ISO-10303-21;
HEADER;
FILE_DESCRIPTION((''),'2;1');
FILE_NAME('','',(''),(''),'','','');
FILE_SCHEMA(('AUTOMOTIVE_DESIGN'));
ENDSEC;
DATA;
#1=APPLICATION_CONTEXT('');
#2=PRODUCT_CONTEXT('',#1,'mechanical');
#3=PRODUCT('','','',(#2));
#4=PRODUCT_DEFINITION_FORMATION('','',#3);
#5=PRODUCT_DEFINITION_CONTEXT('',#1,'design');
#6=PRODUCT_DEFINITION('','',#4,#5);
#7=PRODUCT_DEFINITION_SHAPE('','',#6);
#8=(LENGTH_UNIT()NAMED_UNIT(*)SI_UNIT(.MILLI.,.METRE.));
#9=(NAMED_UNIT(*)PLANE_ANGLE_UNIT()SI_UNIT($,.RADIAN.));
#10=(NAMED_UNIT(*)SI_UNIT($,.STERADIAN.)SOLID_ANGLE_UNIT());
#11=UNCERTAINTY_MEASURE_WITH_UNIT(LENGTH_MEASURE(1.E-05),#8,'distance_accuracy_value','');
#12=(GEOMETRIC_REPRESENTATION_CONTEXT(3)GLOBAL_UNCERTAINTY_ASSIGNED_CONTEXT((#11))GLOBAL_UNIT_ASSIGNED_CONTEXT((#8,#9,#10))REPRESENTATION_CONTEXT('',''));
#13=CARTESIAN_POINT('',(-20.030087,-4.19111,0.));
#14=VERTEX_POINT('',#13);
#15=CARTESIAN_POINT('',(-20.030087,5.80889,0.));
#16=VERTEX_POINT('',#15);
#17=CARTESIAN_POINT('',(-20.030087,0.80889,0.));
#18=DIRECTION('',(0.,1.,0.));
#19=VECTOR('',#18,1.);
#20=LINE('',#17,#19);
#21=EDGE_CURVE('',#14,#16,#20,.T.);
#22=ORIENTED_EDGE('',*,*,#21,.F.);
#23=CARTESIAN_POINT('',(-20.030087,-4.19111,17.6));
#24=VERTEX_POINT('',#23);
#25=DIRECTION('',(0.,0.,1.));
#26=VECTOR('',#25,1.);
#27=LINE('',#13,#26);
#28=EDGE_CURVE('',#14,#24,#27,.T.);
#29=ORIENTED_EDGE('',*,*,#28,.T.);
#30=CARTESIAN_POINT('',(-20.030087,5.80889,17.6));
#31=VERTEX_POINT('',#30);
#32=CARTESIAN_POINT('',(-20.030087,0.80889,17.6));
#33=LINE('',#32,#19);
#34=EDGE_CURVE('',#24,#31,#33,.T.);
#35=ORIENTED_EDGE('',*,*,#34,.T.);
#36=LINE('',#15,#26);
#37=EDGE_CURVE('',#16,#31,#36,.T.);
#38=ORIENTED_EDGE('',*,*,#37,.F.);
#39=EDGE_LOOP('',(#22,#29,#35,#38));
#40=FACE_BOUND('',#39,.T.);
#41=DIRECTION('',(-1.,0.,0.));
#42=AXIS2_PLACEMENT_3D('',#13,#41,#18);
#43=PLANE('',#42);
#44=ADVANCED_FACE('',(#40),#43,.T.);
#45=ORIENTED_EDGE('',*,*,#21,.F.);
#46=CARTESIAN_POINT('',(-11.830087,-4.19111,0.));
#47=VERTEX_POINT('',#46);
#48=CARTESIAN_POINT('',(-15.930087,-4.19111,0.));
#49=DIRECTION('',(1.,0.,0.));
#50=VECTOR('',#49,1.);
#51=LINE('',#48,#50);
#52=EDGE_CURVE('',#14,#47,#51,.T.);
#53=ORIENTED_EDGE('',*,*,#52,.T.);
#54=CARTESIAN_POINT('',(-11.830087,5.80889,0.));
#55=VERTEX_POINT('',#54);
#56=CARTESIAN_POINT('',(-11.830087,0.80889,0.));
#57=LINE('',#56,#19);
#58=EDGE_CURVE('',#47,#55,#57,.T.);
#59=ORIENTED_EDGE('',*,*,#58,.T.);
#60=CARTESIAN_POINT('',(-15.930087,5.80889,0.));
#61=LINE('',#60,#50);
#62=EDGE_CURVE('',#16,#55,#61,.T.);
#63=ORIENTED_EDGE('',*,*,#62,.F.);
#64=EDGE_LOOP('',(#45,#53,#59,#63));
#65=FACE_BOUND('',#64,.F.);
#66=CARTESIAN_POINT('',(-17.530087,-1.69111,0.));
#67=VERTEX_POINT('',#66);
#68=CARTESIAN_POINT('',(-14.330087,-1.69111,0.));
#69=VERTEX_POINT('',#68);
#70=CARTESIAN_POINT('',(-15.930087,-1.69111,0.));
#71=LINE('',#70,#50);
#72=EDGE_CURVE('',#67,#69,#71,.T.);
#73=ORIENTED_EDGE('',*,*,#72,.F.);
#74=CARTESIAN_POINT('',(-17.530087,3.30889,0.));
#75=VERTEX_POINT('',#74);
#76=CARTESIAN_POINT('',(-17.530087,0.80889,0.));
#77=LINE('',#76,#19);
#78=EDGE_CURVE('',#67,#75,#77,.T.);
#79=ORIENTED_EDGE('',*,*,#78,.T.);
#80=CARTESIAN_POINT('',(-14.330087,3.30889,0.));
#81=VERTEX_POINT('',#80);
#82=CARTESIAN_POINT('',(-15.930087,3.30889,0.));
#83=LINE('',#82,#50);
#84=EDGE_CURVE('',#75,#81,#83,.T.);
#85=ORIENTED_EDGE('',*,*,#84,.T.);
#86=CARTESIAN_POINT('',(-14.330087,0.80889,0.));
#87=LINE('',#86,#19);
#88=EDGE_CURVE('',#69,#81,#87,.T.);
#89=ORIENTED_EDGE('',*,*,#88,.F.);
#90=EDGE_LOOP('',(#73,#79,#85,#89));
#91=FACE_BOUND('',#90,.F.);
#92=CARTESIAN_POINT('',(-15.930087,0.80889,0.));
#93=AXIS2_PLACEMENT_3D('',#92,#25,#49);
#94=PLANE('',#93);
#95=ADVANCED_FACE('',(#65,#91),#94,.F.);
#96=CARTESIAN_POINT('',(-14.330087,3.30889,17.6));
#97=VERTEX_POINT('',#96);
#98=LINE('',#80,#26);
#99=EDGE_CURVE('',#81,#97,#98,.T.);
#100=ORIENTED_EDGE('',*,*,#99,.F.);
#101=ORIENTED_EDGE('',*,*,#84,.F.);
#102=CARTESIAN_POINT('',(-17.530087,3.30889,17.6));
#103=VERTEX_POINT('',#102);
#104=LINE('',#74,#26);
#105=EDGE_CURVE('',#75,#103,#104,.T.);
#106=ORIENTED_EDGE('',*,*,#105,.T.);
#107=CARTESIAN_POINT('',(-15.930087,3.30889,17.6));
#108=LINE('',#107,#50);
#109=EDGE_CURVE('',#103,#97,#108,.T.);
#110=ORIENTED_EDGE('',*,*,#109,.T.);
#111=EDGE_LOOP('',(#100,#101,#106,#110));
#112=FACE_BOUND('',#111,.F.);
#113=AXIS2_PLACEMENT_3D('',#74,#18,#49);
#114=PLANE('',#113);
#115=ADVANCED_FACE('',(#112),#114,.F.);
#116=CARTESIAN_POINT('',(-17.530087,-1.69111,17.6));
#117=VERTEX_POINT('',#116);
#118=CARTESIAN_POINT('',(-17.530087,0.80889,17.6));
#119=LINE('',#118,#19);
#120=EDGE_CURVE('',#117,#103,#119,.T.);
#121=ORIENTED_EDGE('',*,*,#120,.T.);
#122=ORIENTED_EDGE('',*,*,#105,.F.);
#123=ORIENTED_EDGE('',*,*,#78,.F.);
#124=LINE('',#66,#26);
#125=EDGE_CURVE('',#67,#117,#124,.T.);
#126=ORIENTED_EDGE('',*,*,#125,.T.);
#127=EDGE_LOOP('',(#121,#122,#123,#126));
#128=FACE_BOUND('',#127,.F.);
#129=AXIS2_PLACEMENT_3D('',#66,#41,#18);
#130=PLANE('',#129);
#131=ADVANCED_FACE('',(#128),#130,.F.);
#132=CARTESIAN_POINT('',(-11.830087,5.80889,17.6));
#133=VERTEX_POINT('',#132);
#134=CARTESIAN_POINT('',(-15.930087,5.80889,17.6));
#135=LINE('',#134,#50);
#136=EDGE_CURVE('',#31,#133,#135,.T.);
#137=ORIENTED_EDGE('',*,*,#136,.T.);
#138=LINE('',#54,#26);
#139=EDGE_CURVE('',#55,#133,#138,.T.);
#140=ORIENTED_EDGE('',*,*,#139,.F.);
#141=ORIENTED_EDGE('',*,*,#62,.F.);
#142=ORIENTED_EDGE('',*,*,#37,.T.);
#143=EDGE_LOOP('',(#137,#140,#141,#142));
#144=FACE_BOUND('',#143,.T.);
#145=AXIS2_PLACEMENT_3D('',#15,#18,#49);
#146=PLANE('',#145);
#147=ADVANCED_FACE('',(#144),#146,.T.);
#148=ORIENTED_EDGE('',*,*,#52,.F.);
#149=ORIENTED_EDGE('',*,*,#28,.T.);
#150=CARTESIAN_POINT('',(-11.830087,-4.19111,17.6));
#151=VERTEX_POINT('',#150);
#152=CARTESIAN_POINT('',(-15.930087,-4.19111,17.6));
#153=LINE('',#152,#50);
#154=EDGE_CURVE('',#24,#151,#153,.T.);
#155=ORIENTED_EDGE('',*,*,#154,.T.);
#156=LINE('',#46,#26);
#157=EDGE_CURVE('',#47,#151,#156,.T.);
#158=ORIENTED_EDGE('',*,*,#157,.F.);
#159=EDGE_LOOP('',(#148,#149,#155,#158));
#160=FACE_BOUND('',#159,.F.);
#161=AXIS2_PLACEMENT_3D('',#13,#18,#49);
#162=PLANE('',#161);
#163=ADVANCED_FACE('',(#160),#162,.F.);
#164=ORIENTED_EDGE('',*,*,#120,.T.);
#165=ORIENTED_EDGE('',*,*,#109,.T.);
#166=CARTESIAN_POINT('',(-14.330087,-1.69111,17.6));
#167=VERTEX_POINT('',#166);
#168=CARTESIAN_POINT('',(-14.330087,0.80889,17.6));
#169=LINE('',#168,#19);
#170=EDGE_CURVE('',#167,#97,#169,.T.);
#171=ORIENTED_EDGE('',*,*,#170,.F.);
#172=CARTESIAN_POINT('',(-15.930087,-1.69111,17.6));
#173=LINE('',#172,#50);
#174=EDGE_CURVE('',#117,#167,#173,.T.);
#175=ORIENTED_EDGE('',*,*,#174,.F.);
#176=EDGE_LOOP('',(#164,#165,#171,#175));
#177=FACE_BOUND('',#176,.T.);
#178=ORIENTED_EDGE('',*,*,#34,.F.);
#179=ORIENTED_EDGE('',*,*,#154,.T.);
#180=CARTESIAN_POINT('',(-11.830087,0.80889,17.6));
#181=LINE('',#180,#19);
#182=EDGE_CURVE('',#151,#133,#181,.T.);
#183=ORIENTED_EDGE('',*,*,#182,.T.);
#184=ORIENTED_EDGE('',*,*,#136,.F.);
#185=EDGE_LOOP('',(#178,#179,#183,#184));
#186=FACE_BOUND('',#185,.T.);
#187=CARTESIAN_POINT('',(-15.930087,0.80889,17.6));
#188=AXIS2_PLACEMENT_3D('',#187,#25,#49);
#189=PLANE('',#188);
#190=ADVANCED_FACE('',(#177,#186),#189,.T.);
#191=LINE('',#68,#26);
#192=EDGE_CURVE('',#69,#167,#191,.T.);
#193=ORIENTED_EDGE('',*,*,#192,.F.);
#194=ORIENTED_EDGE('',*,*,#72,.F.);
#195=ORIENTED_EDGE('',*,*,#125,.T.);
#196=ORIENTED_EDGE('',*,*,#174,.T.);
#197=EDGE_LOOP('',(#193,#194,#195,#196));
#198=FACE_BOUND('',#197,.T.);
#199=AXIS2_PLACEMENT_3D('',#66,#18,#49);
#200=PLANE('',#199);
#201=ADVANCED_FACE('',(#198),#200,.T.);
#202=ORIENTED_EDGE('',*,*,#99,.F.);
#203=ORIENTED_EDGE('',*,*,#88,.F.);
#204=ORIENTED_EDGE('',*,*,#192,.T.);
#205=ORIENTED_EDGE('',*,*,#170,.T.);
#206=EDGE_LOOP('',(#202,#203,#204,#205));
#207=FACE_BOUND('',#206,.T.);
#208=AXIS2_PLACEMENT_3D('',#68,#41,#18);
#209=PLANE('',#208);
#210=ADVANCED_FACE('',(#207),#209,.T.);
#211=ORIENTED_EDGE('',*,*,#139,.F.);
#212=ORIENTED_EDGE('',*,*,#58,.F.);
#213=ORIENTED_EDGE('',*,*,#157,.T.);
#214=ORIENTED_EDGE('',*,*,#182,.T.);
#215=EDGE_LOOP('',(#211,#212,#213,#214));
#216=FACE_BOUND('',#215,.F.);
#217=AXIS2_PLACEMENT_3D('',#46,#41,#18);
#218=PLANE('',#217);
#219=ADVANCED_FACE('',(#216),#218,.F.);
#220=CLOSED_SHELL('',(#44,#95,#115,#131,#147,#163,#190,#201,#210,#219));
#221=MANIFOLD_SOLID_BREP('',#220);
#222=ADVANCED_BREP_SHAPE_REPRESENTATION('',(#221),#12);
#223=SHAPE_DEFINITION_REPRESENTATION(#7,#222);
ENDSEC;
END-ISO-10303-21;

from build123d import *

# Parameters (mm, degrees)
F0_W     = 8.2
F0_H     = 10
F0_W_2   = 3.2
F0_H_2   = 5
F1_DEPTH = 17.6


# Not quite as in the source:
# - a feature names something its author has since deleted; it is built from what else it names


with BuildPart() as f1:
    # F0 (on Top) → F1 (new body)
    with BuildSketch(Plane.XY):
        with Locations((-15.9300868601, 0.8088900894)):
            Rectangle(F0_W, F0_H)
        with Locations((-15.9300868601, 0.8088900894)):
            Rectangle(F0_W_2, F0_H_2, mode=Mode.SUBTRACT)
    extrude(amount=F1_DEPTH)


solid = f1.part
